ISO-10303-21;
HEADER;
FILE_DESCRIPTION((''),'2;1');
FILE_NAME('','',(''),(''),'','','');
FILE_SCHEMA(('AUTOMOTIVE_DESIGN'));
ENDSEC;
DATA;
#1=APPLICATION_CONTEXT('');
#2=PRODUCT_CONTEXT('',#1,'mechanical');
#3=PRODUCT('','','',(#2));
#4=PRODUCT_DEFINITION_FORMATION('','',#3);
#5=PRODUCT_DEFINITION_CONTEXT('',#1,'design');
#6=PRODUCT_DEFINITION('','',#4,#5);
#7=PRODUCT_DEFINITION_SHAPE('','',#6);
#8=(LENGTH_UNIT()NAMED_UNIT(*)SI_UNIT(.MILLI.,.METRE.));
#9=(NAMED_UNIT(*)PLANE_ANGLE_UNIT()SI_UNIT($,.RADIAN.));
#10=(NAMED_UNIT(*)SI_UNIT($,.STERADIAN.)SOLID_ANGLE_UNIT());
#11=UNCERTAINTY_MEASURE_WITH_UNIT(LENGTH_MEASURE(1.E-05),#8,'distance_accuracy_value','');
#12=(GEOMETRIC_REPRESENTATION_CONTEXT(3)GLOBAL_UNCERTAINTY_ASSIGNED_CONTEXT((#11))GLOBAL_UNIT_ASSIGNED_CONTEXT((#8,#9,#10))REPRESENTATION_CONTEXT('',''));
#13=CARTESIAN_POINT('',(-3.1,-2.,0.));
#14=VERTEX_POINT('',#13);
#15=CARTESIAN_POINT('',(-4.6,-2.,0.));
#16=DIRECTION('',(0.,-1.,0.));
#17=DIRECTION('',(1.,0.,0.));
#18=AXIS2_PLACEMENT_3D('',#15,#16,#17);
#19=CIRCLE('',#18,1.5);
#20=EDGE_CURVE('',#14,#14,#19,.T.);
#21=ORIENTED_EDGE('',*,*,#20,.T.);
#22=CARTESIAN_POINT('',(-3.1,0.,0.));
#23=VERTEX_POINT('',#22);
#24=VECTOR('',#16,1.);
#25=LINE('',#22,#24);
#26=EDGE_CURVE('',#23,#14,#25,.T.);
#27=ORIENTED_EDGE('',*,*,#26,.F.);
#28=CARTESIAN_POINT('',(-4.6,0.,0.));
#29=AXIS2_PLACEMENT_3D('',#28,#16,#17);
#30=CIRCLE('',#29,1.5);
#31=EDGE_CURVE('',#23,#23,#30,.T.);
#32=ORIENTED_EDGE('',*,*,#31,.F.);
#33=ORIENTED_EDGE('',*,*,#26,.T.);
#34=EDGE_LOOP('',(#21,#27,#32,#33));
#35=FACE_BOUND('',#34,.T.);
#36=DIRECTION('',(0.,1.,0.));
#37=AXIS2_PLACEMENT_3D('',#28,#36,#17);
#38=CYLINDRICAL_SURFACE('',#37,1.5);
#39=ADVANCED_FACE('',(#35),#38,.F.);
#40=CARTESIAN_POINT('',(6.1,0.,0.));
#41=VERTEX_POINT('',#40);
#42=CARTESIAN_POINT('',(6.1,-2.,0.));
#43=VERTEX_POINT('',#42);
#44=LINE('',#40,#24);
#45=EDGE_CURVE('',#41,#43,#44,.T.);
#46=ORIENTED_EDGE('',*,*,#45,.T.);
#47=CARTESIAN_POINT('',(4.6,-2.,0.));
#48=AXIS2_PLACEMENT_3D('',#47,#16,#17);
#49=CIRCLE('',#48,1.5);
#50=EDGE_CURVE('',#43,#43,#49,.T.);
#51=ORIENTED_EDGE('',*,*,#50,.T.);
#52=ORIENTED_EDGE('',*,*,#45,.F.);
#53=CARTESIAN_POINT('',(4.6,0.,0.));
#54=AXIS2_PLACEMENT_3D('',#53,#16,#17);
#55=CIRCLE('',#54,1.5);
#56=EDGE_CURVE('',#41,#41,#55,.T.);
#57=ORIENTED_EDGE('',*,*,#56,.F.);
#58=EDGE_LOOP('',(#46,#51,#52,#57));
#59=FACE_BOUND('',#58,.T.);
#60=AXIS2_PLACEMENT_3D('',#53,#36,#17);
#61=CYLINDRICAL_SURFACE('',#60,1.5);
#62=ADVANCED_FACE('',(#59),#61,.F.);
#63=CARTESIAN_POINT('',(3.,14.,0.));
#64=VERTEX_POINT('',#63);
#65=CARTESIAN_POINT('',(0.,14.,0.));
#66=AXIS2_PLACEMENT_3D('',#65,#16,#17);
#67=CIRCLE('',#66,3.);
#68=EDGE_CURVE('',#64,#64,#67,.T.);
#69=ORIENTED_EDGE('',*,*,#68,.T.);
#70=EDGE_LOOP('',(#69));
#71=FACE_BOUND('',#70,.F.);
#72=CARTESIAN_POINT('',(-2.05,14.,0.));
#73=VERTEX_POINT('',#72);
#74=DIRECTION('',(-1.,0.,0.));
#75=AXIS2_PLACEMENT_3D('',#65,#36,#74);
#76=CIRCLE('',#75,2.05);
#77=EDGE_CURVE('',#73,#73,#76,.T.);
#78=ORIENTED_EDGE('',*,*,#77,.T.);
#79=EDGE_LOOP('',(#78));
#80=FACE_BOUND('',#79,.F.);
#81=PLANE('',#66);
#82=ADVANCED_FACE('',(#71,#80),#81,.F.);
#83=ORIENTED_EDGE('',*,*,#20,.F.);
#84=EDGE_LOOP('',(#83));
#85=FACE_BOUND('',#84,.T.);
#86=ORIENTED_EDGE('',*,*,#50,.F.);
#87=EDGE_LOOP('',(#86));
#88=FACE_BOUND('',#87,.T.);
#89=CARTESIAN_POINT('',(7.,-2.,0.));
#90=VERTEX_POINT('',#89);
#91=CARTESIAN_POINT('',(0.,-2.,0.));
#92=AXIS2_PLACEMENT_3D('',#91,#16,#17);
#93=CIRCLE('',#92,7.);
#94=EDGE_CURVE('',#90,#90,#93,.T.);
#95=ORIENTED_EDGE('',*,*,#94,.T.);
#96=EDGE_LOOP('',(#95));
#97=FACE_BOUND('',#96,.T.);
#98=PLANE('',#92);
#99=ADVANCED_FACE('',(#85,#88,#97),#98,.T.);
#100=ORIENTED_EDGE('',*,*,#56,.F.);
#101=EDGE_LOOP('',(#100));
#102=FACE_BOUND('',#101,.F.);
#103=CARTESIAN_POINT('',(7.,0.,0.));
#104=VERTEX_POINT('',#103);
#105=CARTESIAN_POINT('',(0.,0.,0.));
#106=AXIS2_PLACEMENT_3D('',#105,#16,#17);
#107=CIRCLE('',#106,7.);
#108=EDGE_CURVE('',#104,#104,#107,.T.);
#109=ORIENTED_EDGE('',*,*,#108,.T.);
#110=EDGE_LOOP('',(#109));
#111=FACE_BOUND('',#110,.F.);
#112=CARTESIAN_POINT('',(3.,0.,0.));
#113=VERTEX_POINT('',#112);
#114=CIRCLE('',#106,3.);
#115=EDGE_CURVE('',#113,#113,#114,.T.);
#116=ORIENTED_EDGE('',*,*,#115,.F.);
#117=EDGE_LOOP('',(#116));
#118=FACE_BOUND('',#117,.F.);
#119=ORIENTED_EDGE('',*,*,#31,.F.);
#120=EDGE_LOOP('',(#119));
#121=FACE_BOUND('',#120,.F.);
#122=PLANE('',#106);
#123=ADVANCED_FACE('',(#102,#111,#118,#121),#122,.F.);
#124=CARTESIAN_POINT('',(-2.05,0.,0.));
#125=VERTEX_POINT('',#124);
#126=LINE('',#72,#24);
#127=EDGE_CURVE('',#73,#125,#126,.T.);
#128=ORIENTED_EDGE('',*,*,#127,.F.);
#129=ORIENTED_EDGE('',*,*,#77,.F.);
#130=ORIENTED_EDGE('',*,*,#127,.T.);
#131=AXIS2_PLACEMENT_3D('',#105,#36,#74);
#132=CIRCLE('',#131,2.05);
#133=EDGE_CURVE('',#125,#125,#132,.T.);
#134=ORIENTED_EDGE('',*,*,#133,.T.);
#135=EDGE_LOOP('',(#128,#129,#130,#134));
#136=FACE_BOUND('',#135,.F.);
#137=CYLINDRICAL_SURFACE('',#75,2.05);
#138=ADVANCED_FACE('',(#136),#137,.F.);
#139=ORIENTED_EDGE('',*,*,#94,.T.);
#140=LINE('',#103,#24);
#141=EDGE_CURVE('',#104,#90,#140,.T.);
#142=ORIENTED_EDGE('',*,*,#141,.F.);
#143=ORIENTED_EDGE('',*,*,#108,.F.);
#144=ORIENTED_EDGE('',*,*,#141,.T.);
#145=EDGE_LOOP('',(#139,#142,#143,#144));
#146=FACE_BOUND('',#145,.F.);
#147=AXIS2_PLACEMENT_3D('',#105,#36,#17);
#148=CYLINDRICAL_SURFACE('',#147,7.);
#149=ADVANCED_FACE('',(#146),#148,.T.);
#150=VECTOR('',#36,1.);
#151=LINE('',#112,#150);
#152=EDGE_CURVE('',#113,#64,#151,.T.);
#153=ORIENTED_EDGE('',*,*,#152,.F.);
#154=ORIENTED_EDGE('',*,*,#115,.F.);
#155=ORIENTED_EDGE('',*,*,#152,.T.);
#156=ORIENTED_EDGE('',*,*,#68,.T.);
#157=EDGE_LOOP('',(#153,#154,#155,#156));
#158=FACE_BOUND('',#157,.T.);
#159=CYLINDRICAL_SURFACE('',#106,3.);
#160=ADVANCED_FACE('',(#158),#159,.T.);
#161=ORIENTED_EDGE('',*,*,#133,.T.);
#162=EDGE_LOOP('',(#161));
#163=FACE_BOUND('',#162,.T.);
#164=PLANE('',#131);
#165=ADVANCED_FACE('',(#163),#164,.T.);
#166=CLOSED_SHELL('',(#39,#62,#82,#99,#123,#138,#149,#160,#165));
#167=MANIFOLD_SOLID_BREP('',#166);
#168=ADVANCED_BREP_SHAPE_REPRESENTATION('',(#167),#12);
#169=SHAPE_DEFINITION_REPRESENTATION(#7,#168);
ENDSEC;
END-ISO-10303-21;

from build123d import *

# Parameters (mm, degrees)
F0_R     = 7
F0_R_2   = 1.5
F0_R_3   = 3
F1_DEPTH = 2
F2_DEPTH = 14
F3_R     = 2.05
F4_DEPTH = 14


# Not quite as in the source:
# - a feature names something its author has since deleted; it is built from what else it names


with BuildPart() as f1:
    # F0 (on Front) → F1 (new body)
    with BuildSketch(Plane.XZ):
        Circle(F0_R)
        with Locations((-4.6, 0)):
            Circle(F0_R_2, mode=Mode.SUBTRACT)
        Circle(F0_R_3, mode=Mode.SUBTRACT)
        with Locations((4.6, 0)):
            Circle(F0_R_2, mode=Mode.SUBTRACT)
        Circle(F0_R_3)
    extrude(amount=F1_DEPTH)

    # F0 (on Front) → F2 (join)
    with BuildSketch(Plane.XZ):
        Circle(F0_R_3)
    extrude(amount=-F2_DEPTH)

    # F3 (on face) → F4 (cut)
    with BuildSketch(Plane(origin=(0, 14, 0), x_dir=(-1, 0, 0), z_dir=(0, 1, 0))):
        Circle(F3_R)
    extrude(amount=-F4_DEPTH, mode=Mode.SUBTRACT)


solid = f1.part
